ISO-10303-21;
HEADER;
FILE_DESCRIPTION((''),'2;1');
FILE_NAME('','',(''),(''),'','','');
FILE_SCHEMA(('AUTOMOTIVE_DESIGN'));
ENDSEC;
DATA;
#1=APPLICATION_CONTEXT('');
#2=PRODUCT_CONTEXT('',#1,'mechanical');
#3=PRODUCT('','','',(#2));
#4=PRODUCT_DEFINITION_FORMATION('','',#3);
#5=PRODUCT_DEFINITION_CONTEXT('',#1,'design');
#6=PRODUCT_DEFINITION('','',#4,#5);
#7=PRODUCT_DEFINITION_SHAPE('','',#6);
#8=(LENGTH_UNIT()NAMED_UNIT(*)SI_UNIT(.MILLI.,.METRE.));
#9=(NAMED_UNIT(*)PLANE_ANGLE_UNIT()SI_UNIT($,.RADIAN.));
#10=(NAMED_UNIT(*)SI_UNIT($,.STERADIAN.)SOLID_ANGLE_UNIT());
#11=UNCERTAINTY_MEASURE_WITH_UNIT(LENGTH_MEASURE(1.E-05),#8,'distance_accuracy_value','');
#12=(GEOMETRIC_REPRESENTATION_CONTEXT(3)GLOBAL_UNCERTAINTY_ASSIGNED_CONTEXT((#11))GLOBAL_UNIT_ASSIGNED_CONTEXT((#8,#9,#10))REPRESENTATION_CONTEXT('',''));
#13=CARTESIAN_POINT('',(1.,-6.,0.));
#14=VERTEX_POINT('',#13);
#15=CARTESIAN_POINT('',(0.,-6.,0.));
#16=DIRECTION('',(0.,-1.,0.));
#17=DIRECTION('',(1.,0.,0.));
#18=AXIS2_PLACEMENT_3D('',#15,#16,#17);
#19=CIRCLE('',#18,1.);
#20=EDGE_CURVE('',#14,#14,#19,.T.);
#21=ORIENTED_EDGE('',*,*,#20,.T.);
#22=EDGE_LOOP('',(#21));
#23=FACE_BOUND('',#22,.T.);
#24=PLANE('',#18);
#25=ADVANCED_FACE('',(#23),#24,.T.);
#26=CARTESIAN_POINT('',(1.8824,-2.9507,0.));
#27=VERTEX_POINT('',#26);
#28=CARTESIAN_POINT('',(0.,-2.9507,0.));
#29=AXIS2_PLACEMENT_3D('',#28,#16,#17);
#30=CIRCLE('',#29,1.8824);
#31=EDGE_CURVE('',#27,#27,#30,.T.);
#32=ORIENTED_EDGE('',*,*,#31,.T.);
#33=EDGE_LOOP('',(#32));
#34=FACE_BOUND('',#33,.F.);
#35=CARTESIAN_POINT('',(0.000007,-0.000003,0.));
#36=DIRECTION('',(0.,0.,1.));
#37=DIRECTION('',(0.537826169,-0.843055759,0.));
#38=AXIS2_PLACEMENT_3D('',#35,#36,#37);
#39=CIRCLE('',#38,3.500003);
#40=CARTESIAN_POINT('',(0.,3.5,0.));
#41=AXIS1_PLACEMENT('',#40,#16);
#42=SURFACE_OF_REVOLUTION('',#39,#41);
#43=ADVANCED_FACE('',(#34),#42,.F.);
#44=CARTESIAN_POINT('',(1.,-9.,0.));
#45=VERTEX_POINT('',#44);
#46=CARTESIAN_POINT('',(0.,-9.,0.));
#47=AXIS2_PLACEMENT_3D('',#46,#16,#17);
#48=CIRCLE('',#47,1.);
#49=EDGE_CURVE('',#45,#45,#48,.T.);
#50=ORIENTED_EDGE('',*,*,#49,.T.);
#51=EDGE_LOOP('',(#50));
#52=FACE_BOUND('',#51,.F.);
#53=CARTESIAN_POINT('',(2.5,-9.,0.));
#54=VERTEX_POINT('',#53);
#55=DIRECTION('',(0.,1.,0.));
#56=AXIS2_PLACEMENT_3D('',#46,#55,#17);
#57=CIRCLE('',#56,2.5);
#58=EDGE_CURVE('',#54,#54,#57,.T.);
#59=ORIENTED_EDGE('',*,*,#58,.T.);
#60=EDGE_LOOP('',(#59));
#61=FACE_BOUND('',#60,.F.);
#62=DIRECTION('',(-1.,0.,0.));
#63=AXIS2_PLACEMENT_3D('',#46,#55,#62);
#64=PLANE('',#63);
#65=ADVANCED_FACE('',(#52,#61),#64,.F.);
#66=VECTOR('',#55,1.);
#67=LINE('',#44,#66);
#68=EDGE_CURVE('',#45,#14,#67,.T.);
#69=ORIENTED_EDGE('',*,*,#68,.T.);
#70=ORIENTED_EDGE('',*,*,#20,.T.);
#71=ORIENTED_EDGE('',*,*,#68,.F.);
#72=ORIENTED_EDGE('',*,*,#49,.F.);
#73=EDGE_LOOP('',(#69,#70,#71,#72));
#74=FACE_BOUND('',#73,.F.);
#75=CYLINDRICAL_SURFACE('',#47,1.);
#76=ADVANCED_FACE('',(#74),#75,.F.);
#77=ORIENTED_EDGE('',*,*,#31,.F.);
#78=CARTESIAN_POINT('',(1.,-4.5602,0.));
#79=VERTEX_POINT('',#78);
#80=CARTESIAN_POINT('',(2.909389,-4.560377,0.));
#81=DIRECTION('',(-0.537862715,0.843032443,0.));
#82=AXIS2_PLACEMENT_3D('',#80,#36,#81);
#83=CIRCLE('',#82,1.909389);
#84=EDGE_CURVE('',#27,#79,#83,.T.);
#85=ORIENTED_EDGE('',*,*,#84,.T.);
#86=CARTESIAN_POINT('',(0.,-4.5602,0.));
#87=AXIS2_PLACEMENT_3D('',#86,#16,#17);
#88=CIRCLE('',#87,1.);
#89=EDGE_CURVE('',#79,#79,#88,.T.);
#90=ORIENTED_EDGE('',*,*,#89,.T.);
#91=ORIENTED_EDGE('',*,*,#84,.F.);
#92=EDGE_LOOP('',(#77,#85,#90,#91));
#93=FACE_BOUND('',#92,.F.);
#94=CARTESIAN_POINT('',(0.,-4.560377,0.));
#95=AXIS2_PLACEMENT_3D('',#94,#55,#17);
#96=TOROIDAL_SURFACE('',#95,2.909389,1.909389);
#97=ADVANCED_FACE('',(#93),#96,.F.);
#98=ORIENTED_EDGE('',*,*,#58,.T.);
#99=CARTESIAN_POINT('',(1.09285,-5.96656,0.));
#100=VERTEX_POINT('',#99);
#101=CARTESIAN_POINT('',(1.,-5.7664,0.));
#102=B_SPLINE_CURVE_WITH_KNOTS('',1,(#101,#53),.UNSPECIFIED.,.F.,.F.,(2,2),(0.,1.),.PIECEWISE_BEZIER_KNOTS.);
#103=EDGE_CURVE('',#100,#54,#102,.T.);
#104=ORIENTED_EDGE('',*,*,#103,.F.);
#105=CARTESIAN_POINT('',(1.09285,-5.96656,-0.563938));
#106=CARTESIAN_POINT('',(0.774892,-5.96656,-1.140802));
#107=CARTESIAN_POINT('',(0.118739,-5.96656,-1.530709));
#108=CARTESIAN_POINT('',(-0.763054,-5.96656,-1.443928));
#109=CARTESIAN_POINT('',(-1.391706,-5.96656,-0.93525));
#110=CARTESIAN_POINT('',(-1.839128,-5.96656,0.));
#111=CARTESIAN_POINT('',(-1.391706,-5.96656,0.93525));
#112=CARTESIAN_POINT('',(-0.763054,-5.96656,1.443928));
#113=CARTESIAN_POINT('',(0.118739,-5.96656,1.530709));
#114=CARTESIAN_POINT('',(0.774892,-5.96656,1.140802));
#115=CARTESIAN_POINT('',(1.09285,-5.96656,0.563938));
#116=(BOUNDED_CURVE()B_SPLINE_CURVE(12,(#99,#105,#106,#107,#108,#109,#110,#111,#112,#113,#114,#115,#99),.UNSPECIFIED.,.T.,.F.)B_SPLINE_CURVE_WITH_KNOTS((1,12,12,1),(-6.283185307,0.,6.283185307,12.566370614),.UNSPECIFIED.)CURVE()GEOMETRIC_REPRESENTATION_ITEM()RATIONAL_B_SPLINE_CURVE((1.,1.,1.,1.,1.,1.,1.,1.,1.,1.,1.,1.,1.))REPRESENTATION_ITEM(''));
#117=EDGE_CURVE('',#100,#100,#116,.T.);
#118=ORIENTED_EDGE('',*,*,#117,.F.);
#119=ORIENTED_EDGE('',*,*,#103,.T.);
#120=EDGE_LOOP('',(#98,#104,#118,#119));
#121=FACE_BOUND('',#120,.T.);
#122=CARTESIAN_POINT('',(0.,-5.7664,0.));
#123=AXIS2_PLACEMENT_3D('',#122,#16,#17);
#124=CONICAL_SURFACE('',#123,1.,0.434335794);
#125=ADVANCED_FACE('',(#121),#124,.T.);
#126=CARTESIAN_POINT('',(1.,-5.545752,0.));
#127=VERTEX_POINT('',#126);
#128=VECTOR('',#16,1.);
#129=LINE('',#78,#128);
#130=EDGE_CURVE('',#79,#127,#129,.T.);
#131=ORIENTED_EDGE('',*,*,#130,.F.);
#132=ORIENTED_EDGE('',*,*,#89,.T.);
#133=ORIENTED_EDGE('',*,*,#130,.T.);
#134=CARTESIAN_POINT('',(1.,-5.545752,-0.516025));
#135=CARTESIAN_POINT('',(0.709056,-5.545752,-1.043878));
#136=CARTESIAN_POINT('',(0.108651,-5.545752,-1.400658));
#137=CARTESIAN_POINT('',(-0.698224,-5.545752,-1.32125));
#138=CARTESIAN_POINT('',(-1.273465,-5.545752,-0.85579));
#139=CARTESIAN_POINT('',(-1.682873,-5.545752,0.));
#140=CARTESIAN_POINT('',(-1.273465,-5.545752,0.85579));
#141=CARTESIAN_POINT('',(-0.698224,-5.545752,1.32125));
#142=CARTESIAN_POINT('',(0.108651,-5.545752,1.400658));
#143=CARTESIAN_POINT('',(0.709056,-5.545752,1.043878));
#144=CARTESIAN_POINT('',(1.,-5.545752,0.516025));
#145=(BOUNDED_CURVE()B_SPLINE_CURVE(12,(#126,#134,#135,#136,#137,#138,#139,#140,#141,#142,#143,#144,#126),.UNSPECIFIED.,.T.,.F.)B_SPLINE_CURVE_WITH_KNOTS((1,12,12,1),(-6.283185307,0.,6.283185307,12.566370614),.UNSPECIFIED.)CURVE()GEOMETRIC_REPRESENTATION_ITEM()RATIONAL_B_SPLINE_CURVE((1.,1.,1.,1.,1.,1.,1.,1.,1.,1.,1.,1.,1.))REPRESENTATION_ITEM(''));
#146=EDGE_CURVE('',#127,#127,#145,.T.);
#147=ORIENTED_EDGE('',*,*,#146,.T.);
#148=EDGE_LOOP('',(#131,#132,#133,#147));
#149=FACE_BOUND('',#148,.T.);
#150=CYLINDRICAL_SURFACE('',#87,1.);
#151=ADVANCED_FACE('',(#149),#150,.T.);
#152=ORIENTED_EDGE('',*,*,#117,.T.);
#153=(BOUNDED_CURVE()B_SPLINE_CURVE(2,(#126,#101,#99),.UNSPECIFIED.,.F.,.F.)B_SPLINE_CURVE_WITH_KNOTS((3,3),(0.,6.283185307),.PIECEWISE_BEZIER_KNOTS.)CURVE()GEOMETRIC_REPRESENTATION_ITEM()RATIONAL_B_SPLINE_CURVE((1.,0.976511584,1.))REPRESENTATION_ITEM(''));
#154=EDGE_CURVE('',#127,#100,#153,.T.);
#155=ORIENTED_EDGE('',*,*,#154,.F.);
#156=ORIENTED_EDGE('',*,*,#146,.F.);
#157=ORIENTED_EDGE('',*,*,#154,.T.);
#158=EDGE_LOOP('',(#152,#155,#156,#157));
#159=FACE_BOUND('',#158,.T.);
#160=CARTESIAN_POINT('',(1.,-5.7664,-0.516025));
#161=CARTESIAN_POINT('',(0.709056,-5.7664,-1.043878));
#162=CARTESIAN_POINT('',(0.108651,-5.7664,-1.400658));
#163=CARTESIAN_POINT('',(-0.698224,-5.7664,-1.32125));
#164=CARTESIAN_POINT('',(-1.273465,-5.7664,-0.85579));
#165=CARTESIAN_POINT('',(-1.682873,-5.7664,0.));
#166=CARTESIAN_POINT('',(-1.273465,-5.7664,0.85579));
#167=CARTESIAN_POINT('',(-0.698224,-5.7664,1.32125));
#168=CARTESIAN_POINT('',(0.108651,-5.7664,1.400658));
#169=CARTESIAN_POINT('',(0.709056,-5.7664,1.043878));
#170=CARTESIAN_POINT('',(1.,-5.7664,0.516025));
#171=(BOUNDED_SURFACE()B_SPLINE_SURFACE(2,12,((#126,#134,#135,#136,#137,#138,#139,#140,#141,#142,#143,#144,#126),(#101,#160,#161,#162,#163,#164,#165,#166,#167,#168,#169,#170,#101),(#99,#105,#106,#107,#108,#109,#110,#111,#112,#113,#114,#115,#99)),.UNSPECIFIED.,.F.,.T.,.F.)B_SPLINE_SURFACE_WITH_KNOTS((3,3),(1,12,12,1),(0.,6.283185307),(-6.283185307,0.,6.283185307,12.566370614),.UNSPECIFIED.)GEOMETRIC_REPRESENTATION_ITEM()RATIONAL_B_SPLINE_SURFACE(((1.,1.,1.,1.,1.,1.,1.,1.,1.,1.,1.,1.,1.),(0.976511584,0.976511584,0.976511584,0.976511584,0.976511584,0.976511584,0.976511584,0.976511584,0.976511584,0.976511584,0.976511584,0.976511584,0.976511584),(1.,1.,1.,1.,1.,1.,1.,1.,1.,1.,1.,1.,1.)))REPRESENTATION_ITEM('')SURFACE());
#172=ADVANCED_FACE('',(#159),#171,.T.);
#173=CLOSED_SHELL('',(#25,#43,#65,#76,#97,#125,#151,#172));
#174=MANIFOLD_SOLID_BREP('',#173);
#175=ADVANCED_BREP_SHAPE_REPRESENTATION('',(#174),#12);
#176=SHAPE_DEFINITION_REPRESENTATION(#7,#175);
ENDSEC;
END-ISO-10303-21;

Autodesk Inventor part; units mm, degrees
ref_plane "YZ Plane" through (0, 0, 0) normal (1, 0, 0) x (0, 1, 0)
ref_plane "XY Plane" through (0, 0, 0) normal (0, 0, 1) x (1, 0, 0)
sketch "Sketch1" plane through (0, 0, 0) normal (0, 0, 1) x (1, 0, 0)
  arc A0 (1.8824, -2.9507) -> (0, 3.5) centre (0, 0) ccw
  line L0 (1, -4.5602) -> (1, -5.7664)
  line L1 (1, -5.7664) -> (0, -5.7664)
  arc A1 (1.8824, -2.9507) -> (1, -4.5602) centre (2.9092, -4.5602) ccw
  line L2 (0, 3.5) -> (0, -5.7664)
  dimension "d0" = 7
  dimension "d1" = 1
revolve "Revolution1" add sketch "Sketch1" angle 360 about axis through (0, 3.5, 0) along (0, -1, 0)
ref_plane "Work Plane2" through (0, -9, 0) normal (0, 1, 0) x (-1, 0, 0)
sketch "Sketch3" plane through (0, -9, 0) normal (0, 1, 0) x (-1, 0, 0)
  circle A0 centre (0, 0) radius 2.5
  point P0 (0, 0)
  dimension "d4" = 5
loft "Loft1" add profiles "Sketch3" section 1 edges at (-1, -5.7664, 0)
fillet "Fillet1" radius 1 1 edges at (-1, -5.7664, 0)
sketch "Sketch4" plane through (0, -9, 0) normal (0, -1, 0) x (1, 0, 0)
  circle A0 centre (0, 0) radius 1.0928 projected
  circle A1 centre (0, 0) radius 1
  point P0 (0, 0)
  dimension "d10" = 2
extrude "Extrusion1" cut sketch "Sketch4" against normal blind 3 contours A1
properties part number "Ball"
